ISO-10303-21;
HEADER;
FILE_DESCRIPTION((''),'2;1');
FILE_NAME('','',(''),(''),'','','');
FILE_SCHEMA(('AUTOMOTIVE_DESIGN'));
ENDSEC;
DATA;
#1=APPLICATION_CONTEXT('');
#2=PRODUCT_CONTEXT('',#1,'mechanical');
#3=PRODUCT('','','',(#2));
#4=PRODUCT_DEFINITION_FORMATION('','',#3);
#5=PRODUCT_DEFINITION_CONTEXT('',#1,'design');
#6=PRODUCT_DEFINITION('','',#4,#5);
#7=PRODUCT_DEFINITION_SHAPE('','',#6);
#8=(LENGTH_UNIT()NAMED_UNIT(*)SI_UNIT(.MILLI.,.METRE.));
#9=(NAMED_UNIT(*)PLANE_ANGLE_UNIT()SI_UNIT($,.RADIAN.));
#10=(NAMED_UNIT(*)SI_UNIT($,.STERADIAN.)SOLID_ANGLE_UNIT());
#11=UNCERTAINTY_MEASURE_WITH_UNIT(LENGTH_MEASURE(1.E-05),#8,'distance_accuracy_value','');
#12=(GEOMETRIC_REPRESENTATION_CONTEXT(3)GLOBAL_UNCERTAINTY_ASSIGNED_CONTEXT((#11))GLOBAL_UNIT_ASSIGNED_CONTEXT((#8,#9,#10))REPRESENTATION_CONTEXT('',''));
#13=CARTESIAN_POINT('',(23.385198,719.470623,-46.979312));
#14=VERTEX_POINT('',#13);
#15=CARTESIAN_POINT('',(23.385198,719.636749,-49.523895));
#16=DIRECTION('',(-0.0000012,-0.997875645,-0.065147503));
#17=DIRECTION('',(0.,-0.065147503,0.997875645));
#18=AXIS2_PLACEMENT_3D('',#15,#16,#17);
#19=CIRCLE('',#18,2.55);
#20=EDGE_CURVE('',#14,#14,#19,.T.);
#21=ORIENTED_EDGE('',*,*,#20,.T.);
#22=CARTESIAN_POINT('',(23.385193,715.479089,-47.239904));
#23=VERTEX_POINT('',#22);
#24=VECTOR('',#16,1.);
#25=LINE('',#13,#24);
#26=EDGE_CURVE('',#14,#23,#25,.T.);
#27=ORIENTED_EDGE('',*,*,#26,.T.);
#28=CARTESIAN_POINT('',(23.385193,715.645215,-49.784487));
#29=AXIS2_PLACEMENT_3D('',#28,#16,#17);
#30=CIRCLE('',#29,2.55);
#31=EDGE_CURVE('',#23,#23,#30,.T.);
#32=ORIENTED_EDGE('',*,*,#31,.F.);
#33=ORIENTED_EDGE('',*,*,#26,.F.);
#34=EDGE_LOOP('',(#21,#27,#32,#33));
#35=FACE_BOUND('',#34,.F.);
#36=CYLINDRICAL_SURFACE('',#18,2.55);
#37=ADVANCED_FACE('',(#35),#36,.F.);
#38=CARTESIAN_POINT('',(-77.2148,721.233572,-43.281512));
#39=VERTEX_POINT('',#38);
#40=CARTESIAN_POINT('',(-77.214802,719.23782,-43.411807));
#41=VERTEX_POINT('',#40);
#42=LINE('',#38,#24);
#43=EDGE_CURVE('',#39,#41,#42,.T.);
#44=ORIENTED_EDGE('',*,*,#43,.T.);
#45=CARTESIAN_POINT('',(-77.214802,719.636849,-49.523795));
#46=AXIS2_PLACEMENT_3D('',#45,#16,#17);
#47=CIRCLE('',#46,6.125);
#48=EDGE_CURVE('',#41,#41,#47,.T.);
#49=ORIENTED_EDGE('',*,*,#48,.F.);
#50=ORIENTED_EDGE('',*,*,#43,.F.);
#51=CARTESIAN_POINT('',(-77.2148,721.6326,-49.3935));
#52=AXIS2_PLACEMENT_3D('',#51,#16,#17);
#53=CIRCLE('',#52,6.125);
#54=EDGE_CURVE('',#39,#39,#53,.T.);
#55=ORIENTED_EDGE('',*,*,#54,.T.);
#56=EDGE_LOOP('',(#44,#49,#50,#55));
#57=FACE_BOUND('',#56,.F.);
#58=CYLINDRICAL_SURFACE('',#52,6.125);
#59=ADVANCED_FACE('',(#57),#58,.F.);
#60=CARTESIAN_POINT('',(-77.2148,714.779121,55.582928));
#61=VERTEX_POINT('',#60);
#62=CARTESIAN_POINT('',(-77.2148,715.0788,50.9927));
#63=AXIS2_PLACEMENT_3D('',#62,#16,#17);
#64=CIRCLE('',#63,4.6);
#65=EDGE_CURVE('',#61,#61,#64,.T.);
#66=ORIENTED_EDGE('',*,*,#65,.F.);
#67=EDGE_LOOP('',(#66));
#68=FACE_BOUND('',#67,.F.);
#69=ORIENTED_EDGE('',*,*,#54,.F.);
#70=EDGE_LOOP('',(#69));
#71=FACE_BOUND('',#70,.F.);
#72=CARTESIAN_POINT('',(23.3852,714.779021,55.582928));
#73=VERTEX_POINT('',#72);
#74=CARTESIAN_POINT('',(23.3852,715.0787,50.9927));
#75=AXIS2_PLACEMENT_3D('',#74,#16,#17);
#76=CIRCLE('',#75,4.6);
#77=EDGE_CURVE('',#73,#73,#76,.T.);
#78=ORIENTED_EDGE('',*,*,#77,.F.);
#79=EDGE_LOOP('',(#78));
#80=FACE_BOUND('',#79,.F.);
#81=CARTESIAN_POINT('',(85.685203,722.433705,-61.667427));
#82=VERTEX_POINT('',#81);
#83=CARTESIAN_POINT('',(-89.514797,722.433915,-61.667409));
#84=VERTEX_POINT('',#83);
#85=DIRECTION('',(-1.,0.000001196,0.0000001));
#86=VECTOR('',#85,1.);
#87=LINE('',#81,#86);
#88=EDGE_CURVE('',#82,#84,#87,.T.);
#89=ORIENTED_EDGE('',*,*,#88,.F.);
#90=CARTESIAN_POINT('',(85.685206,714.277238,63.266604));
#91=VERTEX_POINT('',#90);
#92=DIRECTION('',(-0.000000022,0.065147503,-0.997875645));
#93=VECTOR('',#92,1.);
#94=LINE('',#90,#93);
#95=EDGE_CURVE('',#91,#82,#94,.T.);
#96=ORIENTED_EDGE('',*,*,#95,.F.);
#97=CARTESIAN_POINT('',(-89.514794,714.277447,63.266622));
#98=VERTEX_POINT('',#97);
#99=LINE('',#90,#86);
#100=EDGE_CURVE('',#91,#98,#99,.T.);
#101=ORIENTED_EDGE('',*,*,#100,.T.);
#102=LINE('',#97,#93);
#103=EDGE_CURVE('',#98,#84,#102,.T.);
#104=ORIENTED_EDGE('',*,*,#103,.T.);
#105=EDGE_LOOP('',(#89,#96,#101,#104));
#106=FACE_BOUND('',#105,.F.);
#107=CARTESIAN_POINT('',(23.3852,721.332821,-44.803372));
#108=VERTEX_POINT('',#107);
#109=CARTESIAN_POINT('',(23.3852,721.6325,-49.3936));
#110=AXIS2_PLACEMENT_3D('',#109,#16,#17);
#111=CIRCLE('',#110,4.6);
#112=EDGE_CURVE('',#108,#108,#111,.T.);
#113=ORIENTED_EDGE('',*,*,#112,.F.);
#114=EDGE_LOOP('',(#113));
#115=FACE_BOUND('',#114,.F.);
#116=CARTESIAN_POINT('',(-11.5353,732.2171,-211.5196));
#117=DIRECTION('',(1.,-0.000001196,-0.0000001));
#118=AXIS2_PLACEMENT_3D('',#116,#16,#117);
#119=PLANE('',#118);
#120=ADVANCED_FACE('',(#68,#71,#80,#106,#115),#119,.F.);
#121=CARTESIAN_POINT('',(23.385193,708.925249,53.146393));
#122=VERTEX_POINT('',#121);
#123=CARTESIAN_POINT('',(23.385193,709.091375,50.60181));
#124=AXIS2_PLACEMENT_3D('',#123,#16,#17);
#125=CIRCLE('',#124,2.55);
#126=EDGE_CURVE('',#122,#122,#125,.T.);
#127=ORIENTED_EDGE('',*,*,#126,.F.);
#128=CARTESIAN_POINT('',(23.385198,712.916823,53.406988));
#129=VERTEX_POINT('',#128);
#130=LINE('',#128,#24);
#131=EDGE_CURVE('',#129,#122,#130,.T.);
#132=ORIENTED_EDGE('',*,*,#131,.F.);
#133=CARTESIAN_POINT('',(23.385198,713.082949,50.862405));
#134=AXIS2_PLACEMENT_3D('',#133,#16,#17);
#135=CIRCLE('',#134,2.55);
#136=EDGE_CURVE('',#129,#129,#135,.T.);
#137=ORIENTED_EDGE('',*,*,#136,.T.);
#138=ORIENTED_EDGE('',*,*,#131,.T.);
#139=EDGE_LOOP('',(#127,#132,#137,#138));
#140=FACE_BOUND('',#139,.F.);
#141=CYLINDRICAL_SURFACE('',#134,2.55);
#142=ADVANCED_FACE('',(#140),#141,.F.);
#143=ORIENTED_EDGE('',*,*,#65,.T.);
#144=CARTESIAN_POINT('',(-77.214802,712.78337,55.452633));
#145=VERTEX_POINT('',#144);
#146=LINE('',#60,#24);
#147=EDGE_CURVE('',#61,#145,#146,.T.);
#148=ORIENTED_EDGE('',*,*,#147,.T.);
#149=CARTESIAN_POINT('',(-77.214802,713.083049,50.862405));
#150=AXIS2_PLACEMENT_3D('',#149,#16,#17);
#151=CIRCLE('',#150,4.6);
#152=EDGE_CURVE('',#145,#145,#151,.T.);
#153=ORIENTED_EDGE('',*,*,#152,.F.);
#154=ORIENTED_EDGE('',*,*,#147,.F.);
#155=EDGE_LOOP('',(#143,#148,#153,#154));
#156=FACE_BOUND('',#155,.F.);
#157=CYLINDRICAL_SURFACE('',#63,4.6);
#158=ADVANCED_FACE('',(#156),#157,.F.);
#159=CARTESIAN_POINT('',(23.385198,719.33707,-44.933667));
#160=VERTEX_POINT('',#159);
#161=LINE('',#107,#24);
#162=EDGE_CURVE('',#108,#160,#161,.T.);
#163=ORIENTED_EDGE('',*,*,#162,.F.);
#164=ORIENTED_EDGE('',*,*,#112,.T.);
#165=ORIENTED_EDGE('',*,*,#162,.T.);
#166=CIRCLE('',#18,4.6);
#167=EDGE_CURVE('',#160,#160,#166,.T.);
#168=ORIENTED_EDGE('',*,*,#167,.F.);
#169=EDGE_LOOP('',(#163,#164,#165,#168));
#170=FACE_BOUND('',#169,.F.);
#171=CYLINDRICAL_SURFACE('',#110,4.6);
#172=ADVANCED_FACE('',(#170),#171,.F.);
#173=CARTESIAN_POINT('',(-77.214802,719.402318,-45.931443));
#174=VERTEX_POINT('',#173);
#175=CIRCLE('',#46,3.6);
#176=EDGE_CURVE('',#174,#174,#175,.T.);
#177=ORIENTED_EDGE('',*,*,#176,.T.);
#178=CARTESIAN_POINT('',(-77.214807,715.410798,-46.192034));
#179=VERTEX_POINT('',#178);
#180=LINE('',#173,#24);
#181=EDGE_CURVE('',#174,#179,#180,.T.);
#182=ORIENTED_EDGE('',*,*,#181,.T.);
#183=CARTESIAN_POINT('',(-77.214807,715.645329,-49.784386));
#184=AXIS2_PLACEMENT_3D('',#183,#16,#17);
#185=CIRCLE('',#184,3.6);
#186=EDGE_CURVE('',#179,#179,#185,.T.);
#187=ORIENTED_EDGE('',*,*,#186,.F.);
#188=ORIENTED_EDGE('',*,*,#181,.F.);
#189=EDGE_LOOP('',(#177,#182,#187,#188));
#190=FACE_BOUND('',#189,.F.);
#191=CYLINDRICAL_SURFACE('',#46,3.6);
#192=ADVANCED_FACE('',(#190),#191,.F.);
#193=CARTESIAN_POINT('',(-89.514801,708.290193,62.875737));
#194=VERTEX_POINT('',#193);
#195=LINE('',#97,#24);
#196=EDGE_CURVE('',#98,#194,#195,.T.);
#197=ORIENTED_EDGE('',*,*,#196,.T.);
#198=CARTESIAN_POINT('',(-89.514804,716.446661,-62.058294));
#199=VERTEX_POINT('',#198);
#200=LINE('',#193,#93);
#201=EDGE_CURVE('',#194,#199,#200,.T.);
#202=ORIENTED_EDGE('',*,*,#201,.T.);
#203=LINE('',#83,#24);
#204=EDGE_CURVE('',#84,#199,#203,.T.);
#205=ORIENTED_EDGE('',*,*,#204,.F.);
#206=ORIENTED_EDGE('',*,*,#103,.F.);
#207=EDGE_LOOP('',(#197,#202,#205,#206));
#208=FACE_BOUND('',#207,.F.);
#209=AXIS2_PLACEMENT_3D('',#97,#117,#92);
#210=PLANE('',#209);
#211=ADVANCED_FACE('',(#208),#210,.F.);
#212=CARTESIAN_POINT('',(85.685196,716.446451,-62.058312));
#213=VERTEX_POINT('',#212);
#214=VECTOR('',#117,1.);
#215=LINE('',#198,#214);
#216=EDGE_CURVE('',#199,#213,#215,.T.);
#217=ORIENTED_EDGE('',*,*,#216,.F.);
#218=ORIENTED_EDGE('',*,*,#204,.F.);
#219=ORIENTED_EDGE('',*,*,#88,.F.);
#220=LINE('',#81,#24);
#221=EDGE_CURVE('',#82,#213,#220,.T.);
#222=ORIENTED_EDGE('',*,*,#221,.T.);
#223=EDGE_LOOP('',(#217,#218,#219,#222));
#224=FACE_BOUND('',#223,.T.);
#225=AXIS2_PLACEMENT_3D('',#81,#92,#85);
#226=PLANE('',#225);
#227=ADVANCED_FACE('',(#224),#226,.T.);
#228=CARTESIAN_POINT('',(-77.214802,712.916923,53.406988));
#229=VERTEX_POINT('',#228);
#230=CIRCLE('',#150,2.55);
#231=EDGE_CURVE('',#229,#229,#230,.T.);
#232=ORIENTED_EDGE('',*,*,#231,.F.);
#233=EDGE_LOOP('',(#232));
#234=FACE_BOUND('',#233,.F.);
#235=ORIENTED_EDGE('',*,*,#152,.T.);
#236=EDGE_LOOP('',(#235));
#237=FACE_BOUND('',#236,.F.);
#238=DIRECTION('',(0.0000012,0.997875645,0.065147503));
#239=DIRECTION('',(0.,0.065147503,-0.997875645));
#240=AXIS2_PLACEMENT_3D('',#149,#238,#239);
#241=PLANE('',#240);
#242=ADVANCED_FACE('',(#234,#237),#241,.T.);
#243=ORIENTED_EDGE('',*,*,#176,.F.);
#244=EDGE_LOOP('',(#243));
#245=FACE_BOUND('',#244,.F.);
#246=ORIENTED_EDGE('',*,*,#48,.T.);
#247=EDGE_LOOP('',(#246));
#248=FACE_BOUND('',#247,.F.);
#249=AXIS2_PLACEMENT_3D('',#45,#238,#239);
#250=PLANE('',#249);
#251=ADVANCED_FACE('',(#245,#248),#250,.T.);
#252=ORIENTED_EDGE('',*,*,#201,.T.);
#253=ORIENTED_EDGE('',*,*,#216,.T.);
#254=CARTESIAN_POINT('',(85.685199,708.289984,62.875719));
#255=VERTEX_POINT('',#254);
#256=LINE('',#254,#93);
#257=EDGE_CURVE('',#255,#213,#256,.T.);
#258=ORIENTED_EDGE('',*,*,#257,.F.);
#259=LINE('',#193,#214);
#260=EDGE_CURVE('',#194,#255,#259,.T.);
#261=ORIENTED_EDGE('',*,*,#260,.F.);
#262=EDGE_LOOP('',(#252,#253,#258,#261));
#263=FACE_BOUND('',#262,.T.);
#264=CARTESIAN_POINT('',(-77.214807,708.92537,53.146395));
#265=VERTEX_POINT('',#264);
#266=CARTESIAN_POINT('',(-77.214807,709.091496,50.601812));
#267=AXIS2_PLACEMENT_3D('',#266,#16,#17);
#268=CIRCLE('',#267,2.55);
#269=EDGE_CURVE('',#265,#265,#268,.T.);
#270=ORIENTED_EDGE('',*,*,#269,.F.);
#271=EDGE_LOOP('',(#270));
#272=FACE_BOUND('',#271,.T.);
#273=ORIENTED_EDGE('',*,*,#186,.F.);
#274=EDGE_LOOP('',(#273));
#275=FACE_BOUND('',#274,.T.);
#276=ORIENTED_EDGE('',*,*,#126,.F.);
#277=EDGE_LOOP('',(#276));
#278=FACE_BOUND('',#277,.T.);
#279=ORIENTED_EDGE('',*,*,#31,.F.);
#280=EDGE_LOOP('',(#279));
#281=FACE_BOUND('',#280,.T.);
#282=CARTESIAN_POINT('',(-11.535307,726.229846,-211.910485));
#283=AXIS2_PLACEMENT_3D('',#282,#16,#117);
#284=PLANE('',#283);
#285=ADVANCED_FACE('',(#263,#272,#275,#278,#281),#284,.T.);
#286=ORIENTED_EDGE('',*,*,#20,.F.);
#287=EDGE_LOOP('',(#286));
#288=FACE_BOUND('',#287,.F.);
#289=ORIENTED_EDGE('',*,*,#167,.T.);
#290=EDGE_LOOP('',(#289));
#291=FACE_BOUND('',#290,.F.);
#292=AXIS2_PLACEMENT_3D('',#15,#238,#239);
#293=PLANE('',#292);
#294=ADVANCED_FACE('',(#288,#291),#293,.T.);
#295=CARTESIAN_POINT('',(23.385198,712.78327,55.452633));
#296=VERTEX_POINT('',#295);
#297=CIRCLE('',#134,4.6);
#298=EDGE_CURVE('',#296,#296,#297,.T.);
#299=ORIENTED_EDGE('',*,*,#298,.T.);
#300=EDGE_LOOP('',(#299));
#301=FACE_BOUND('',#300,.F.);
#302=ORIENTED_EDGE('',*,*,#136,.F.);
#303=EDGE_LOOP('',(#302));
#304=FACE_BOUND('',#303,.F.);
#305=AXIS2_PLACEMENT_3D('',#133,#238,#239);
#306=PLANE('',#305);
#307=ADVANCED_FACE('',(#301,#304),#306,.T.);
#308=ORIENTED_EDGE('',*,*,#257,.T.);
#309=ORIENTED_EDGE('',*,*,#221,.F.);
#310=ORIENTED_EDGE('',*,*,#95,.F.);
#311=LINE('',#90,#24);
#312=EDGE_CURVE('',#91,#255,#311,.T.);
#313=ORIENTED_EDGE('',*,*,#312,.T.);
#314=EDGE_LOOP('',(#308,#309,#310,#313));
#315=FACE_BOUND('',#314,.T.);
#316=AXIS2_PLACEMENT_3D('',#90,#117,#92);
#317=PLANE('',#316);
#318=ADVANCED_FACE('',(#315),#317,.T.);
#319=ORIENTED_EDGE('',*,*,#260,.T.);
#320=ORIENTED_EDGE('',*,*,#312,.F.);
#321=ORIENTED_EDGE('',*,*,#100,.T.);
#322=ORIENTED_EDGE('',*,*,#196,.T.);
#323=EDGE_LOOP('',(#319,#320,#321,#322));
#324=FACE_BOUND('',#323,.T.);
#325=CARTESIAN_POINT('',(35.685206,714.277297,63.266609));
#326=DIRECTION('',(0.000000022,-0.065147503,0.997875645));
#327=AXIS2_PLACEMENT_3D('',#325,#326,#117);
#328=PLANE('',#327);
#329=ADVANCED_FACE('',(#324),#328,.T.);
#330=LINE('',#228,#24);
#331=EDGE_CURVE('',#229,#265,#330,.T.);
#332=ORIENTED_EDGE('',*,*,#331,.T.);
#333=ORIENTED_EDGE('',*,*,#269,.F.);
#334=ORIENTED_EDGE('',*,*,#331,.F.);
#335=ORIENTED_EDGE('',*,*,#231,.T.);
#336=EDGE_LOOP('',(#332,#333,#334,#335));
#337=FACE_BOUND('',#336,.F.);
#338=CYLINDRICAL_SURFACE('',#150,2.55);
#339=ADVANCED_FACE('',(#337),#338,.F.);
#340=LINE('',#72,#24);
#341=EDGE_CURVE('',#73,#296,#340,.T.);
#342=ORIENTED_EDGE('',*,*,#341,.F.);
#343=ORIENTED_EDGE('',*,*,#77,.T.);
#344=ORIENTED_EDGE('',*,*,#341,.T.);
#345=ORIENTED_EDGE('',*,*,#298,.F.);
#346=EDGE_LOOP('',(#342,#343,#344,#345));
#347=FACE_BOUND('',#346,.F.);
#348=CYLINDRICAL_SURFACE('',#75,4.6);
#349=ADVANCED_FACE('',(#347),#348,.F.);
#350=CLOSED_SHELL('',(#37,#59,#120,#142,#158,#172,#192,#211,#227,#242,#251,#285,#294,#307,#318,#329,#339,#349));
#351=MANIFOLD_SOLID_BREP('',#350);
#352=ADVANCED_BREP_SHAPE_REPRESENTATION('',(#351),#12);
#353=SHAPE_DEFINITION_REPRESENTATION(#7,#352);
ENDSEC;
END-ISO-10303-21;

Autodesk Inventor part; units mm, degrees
ref_plane "YZ Plane" through (0, 0, 0) normal (1, 0, 0) x (0, 1, 0)
ref_plane "XZ Plane" through (0, 0, 0) normal (0, 1, 0) x (-1, 0, 0)
ref_plane "XY Plane" through (0, 0, 0) normal (0, 0, 1) x (1, 0, 0)
ref_plane "Work Plane1" through (-11.5353, 732.2171, -211.5196) normal (-0.0000012, -0.9978756, -0.0651475) x (1, -0.0000012, -0.0000001)
sketch "Sketch2" plane through (-11.5353, 732.2171, -211.5196) normal (-0.0000012, -0.9978756, -0.0651475) x (1, -0.0000012, -0.0000001)
  line L0 (47.2205, 275.3712) -> (-77.9795, 275.3712)
  line L1 (-77.9795, 275.3712) -> (-77.9795, 150.1712)
  line L2 (-77.9795, 150.1712) -> (47.2205, 150.1712)
  line L3 (47.2205, 150.1712) -> (47.2205, 275.3712) construction
  line L4 (47.2205, 275.3712) -> (97.2205, 275.3712)
  line L5 (97.2205, 275.3712) -> (97.2205, 150.1712)
  line L6 (97.2205, 150.1712) -> (47.2205, 150.1712)
  line L7 (34.9205, 141.5153) -> (34.9205, 309.2543) construction
  line L8 (-65.6795, 309.2543) -> (-65.6795, 110.7061) construction
  line L9 (72.2205, 263.0712) -> (-113.8811, 263.0712) construction
  line L10 (72.2205, 162.4712) -> (-118.8511, 162.4712) construction
  point P0 (11.5362, 258.7723)
  point P1 (-138.0714, 537.573)
  point P2 (-211.9698, 678.1667)
  point P3 (34.9205, 263.0712)
  point P4 (34.9205, 162.4712)
  point P5 (-65.6795, 162.4712)
  point P6 (-65.6795, 263.0712)
  dimension "d15" = 125.2
  dimension "d16" = 125.2
  dimension "d23" = 50
  dimension "d30" = 12.3
  dimension "d31" = 100.6
  dimension "d32" = 12.3
  dimension "d33" = 100.6
extrude "Extrusion2" add sketch "Sketch2" along normal blind 6
hole "Hole1" at (23.3852, 715.0787, 50.9927) at (23.3852, 721.6325, -49.3936) at (-77.2148, 715.0788, 50.9927) direction (-0.0000012, -0.9978756, -0.0651475) diameter 5.1 end through all counterbore diameter 9.2 counterbore depth 2
hole "Hole2" at (-77.2148, 721.6326, -49.3935) direction (-0.0000012, -0.9978756, -0.0651475) diameter 7.2 end through all counterbore diameter 12.25 counterbore depth 2
properties part number "X axis carriage"
